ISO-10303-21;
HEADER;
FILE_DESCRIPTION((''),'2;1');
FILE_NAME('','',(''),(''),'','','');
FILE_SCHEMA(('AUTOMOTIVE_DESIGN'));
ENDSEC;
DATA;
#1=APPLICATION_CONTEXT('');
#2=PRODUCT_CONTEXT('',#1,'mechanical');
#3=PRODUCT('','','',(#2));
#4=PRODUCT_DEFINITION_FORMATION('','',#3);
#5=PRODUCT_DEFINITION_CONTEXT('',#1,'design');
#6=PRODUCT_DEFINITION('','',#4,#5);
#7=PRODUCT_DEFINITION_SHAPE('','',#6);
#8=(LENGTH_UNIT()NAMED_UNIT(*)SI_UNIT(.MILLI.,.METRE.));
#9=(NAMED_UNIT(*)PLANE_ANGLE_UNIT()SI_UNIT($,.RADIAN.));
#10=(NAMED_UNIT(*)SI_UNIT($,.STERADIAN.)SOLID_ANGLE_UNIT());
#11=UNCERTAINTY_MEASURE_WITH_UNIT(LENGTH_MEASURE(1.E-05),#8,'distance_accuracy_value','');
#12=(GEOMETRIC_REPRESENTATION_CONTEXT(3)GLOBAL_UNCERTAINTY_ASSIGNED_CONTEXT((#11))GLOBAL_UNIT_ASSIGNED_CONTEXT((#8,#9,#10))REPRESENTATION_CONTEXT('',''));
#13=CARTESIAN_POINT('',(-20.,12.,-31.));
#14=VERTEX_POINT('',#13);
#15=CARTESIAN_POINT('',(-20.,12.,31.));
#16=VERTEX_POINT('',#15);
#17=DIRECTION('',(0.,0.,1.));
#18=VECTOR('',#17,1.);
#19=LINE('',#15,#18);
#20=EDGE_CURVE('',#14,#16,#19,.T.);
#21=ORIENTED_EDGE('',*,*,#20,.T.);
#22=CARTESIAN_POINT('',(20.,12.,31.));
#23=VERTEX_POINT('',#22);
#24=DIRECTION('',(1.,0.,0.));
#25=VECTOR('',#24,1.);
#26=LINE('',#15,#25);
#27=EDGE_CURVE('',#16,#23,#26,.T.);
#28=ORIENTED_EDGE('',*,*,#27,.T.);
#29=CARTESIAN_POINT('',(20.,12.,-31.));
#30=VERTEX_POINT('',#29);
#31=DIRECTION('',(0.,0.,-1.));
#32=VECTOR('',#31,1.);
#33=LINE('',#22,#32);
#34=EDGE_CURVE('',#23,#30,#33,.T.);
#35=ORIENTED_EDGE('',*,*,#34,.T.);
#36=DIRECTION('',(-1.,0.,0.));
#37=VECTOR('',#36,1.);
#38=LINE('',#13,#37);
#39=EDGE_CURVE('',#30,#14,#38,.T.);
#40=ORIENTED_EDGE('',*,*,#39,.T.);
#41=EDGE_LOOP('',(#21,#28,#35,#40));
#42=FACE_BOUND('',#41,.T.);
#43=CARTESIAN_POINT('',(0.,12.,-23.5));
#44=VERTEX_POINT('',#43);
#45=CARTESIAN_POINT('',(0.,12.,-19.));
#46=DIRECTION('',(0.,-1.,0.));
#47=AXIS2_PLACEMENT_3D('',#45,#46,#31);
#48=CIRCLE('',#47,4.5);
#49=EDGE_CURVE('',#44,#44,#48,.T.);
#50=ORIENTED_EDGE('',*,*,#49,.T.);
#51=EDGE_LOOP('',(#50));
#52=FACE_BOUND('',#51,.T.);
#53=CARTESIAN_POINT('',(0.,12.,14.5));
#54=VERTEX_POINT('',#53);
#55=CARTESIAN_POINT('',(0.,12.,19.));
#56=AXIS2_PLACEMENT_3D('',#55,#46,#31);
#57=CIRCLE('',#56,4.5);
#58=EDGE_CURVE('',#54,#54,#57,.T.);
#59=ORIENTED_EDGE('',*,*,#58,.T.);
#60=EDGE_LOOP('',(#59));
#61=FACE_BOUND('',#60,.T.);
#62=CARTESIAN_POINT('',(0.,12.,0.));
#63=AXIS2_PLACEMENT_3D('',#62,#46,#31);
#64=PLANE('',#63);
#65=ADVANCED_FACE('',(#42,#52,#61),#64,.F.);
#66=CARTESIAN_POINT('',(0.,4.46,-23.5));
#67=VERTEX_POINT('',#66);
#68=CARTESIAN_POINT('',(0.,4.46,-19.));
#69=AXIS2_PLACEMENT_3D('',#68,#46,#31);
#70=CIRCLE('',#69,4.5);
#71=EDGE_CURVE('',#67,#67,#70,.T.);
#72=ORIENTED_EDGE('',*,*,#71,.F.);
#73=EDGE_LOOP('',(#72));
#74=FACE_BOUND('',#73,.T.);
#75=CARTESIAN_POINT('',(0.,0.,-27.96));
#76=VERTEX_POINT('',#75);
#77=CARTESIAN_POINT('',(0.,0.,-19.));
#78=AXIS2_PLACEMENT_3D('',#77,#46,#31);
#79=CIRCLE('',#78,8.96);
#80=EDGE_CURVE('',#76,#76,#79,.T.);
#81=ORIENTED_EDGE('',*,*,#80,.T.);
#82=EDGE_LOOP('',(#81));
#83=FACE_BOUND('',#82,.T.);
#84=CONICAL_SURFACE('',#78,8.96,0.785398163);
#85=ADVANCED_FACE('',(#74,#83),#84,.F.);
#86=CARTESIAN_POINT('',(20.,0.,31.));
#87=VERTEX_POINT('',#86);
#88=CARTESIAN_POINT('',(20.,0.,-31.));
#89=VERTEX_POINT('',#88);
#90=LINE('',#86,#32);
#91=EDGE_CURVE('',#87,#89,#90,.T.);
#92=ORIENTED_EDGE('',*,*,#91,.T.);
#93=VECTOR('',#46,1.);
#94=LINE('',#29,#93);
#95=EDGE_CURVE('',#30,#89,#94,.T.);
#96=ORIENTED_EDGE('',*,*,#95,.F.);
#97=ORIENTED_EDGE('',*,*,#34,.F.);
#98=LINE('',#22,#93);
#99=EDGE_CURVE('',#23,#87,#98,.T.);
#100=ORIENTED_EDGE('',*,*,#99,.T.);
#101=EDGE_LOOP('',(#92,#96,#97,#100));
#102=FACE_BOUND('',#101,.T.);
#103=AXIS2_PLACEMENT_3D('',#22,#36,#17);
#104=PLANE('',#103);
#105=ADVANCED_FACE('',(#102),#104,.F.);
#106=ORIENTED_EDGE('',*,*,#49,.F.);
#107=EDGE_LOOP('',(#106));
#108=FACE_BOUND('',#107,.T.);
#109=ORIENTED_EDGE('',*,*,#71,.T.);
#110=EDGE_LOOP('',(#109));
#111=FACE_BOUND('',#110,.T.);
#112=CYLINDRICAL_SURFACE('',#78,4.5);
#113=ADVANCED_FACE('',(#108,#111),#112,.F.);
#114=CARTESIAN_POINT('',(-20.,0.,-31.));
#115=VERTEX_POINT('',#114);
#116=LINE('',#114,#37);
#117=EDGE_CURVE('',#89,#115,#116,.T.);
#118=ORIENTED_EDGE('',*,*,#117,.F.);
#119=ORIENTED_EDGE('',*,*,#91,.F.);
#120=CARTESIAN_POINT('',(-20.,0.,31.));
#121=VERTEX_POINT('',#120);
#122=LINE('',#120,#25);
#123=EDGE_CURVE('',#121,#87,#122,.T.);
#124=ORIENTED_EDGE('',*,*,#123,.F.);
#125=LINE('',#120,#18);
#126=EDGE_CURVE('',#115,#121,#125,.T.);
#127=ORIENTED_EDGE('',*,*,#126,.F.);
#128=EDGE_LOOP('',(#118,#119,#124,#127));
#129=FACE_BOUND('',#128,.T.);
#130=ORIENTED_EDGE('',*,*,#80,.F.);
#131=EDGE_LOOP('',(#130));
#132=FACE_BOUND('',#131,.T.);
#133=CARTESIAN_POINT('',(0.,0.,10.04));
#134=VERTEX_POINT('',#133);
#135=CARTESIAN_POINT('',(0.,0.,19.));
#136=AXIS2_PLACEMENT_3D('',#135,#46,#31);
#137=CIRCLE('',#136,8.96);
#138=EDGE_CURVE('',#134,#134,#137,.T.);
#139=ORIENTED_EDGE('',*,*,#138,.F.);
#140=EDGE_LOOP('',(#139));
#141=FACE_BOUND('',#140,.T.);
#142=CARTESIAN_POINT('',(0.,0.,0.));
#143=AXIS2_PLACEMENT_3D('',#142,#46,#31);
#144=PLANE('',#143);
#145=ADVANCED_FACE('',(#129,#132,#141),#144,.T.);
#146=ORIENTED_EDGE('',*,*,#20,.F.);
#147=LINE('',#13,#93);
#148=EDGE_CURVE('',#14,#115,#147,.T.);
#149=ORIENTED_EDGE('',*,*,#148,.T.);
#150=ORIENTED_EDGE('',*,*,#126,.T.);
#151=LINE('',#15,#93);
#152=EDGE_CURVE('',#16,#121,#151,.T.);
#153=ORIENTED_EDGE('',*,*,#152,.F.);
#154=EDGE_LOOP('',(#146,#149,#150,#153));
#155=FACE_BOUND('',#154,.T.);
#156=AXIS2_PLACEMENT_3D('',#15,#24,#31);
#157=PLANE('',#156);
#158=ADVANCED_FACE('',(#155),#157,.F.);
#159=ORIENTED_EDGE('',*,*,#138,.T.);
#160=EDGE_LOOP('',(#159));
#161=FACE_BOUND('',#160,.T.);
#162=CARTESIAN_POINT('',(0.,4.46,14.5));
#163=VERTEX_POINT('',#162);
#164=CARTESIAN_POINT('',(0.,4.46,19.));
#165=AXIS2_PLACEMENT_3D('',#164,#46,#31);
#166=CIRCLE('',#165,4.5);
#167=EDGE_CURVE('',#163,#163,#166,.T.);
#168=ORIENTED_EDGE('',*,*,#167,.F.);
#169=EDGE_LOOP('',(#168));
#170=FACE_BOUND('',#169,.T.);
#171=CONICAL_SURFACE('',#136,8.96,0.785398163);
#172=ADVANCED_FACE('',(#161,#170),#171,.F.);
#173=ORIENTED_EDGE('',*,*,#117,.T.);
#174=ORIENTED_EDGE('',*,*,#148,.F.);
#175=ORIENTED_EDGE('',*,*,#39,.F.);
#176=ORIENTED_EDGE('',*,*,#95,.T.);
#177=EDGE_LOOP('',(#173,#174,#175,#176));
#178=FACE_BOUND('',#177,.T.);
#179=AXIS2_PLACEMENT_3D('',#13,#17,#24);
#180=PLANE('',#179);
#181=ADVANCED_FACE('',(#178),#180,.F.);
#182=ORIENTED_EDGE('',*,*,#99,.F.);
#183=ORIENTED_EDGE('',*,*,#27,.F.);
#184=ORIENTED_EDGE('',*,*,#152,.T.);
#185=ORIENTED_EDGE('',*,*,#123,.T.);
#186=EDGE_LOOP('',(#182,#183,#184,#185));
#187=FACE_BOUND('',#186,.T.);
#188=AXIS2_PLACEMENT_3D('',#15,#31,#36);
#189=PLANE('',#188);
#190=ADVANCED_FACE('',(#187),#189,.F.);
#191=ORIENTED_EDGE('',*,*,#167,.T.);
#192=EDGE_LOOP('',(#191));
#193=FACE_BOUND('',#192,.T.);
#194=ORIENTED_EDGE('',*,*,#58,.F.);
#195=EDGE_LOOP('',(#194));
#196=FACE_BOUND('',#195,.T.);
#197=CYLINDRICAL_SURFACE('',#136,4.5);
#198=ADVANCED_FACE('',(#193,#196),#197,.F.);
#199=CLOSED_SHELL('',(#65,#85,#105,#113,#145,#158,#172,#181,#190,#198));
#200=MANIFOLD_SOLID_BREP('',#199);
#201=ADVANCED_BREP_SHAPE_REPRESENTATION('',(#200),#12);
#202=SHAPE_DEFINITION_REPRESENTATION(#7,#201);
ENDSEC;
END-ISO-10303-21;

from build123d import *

# Parameters (mm, degrees)
SKETCH1_W           = 40
SKETCH1_H           = 62
BOSS_EXTRUDE1_DEPTH = 12


# Read off the part's stored shape, not the designer's step: AdvancedHole1
with BuildPart() as part:
    # Sketch1 → Boss-Extrude1 (new body)
    with BuildSketch(Plane(origin=(0, 0, 0), x_dir=(1, 0, 0), z_dir=(0, 1, 0))):
        Rectangle(SKETCH1_W, SKETCH1_H)
    extrude(amount=BOSS_EXTRUDE1_DEPTH)

    # AdvancedHole1 outline → AdvancedHole1 (revolve, cut)
    with BuildSketch(Plane.XY.offset(-19)):
        Polygon((4.5, 4.46), (4.5, 12), (0, 12), (0, 0), (8.96, 0), align=None)
    revolve(axis=Axis((0, 0, -19), (0, 1, 0)), mode=Mode.SUBTRACT)

    # AdvancedHole1 2 outline → AdvancedHole1 2 (revolve, cut)
    with BuildSketch(Plane.XY.offset(19)):
        Polygon((4.5, 4.46), (4.5, 12), (0, 12), (0, 0), (8.96, 0), align=None)
    revolve(axis=Axis((0, 0, 19), (0, 1, 0)), mode=Mode.SUBTRACT)


solid = part.part
